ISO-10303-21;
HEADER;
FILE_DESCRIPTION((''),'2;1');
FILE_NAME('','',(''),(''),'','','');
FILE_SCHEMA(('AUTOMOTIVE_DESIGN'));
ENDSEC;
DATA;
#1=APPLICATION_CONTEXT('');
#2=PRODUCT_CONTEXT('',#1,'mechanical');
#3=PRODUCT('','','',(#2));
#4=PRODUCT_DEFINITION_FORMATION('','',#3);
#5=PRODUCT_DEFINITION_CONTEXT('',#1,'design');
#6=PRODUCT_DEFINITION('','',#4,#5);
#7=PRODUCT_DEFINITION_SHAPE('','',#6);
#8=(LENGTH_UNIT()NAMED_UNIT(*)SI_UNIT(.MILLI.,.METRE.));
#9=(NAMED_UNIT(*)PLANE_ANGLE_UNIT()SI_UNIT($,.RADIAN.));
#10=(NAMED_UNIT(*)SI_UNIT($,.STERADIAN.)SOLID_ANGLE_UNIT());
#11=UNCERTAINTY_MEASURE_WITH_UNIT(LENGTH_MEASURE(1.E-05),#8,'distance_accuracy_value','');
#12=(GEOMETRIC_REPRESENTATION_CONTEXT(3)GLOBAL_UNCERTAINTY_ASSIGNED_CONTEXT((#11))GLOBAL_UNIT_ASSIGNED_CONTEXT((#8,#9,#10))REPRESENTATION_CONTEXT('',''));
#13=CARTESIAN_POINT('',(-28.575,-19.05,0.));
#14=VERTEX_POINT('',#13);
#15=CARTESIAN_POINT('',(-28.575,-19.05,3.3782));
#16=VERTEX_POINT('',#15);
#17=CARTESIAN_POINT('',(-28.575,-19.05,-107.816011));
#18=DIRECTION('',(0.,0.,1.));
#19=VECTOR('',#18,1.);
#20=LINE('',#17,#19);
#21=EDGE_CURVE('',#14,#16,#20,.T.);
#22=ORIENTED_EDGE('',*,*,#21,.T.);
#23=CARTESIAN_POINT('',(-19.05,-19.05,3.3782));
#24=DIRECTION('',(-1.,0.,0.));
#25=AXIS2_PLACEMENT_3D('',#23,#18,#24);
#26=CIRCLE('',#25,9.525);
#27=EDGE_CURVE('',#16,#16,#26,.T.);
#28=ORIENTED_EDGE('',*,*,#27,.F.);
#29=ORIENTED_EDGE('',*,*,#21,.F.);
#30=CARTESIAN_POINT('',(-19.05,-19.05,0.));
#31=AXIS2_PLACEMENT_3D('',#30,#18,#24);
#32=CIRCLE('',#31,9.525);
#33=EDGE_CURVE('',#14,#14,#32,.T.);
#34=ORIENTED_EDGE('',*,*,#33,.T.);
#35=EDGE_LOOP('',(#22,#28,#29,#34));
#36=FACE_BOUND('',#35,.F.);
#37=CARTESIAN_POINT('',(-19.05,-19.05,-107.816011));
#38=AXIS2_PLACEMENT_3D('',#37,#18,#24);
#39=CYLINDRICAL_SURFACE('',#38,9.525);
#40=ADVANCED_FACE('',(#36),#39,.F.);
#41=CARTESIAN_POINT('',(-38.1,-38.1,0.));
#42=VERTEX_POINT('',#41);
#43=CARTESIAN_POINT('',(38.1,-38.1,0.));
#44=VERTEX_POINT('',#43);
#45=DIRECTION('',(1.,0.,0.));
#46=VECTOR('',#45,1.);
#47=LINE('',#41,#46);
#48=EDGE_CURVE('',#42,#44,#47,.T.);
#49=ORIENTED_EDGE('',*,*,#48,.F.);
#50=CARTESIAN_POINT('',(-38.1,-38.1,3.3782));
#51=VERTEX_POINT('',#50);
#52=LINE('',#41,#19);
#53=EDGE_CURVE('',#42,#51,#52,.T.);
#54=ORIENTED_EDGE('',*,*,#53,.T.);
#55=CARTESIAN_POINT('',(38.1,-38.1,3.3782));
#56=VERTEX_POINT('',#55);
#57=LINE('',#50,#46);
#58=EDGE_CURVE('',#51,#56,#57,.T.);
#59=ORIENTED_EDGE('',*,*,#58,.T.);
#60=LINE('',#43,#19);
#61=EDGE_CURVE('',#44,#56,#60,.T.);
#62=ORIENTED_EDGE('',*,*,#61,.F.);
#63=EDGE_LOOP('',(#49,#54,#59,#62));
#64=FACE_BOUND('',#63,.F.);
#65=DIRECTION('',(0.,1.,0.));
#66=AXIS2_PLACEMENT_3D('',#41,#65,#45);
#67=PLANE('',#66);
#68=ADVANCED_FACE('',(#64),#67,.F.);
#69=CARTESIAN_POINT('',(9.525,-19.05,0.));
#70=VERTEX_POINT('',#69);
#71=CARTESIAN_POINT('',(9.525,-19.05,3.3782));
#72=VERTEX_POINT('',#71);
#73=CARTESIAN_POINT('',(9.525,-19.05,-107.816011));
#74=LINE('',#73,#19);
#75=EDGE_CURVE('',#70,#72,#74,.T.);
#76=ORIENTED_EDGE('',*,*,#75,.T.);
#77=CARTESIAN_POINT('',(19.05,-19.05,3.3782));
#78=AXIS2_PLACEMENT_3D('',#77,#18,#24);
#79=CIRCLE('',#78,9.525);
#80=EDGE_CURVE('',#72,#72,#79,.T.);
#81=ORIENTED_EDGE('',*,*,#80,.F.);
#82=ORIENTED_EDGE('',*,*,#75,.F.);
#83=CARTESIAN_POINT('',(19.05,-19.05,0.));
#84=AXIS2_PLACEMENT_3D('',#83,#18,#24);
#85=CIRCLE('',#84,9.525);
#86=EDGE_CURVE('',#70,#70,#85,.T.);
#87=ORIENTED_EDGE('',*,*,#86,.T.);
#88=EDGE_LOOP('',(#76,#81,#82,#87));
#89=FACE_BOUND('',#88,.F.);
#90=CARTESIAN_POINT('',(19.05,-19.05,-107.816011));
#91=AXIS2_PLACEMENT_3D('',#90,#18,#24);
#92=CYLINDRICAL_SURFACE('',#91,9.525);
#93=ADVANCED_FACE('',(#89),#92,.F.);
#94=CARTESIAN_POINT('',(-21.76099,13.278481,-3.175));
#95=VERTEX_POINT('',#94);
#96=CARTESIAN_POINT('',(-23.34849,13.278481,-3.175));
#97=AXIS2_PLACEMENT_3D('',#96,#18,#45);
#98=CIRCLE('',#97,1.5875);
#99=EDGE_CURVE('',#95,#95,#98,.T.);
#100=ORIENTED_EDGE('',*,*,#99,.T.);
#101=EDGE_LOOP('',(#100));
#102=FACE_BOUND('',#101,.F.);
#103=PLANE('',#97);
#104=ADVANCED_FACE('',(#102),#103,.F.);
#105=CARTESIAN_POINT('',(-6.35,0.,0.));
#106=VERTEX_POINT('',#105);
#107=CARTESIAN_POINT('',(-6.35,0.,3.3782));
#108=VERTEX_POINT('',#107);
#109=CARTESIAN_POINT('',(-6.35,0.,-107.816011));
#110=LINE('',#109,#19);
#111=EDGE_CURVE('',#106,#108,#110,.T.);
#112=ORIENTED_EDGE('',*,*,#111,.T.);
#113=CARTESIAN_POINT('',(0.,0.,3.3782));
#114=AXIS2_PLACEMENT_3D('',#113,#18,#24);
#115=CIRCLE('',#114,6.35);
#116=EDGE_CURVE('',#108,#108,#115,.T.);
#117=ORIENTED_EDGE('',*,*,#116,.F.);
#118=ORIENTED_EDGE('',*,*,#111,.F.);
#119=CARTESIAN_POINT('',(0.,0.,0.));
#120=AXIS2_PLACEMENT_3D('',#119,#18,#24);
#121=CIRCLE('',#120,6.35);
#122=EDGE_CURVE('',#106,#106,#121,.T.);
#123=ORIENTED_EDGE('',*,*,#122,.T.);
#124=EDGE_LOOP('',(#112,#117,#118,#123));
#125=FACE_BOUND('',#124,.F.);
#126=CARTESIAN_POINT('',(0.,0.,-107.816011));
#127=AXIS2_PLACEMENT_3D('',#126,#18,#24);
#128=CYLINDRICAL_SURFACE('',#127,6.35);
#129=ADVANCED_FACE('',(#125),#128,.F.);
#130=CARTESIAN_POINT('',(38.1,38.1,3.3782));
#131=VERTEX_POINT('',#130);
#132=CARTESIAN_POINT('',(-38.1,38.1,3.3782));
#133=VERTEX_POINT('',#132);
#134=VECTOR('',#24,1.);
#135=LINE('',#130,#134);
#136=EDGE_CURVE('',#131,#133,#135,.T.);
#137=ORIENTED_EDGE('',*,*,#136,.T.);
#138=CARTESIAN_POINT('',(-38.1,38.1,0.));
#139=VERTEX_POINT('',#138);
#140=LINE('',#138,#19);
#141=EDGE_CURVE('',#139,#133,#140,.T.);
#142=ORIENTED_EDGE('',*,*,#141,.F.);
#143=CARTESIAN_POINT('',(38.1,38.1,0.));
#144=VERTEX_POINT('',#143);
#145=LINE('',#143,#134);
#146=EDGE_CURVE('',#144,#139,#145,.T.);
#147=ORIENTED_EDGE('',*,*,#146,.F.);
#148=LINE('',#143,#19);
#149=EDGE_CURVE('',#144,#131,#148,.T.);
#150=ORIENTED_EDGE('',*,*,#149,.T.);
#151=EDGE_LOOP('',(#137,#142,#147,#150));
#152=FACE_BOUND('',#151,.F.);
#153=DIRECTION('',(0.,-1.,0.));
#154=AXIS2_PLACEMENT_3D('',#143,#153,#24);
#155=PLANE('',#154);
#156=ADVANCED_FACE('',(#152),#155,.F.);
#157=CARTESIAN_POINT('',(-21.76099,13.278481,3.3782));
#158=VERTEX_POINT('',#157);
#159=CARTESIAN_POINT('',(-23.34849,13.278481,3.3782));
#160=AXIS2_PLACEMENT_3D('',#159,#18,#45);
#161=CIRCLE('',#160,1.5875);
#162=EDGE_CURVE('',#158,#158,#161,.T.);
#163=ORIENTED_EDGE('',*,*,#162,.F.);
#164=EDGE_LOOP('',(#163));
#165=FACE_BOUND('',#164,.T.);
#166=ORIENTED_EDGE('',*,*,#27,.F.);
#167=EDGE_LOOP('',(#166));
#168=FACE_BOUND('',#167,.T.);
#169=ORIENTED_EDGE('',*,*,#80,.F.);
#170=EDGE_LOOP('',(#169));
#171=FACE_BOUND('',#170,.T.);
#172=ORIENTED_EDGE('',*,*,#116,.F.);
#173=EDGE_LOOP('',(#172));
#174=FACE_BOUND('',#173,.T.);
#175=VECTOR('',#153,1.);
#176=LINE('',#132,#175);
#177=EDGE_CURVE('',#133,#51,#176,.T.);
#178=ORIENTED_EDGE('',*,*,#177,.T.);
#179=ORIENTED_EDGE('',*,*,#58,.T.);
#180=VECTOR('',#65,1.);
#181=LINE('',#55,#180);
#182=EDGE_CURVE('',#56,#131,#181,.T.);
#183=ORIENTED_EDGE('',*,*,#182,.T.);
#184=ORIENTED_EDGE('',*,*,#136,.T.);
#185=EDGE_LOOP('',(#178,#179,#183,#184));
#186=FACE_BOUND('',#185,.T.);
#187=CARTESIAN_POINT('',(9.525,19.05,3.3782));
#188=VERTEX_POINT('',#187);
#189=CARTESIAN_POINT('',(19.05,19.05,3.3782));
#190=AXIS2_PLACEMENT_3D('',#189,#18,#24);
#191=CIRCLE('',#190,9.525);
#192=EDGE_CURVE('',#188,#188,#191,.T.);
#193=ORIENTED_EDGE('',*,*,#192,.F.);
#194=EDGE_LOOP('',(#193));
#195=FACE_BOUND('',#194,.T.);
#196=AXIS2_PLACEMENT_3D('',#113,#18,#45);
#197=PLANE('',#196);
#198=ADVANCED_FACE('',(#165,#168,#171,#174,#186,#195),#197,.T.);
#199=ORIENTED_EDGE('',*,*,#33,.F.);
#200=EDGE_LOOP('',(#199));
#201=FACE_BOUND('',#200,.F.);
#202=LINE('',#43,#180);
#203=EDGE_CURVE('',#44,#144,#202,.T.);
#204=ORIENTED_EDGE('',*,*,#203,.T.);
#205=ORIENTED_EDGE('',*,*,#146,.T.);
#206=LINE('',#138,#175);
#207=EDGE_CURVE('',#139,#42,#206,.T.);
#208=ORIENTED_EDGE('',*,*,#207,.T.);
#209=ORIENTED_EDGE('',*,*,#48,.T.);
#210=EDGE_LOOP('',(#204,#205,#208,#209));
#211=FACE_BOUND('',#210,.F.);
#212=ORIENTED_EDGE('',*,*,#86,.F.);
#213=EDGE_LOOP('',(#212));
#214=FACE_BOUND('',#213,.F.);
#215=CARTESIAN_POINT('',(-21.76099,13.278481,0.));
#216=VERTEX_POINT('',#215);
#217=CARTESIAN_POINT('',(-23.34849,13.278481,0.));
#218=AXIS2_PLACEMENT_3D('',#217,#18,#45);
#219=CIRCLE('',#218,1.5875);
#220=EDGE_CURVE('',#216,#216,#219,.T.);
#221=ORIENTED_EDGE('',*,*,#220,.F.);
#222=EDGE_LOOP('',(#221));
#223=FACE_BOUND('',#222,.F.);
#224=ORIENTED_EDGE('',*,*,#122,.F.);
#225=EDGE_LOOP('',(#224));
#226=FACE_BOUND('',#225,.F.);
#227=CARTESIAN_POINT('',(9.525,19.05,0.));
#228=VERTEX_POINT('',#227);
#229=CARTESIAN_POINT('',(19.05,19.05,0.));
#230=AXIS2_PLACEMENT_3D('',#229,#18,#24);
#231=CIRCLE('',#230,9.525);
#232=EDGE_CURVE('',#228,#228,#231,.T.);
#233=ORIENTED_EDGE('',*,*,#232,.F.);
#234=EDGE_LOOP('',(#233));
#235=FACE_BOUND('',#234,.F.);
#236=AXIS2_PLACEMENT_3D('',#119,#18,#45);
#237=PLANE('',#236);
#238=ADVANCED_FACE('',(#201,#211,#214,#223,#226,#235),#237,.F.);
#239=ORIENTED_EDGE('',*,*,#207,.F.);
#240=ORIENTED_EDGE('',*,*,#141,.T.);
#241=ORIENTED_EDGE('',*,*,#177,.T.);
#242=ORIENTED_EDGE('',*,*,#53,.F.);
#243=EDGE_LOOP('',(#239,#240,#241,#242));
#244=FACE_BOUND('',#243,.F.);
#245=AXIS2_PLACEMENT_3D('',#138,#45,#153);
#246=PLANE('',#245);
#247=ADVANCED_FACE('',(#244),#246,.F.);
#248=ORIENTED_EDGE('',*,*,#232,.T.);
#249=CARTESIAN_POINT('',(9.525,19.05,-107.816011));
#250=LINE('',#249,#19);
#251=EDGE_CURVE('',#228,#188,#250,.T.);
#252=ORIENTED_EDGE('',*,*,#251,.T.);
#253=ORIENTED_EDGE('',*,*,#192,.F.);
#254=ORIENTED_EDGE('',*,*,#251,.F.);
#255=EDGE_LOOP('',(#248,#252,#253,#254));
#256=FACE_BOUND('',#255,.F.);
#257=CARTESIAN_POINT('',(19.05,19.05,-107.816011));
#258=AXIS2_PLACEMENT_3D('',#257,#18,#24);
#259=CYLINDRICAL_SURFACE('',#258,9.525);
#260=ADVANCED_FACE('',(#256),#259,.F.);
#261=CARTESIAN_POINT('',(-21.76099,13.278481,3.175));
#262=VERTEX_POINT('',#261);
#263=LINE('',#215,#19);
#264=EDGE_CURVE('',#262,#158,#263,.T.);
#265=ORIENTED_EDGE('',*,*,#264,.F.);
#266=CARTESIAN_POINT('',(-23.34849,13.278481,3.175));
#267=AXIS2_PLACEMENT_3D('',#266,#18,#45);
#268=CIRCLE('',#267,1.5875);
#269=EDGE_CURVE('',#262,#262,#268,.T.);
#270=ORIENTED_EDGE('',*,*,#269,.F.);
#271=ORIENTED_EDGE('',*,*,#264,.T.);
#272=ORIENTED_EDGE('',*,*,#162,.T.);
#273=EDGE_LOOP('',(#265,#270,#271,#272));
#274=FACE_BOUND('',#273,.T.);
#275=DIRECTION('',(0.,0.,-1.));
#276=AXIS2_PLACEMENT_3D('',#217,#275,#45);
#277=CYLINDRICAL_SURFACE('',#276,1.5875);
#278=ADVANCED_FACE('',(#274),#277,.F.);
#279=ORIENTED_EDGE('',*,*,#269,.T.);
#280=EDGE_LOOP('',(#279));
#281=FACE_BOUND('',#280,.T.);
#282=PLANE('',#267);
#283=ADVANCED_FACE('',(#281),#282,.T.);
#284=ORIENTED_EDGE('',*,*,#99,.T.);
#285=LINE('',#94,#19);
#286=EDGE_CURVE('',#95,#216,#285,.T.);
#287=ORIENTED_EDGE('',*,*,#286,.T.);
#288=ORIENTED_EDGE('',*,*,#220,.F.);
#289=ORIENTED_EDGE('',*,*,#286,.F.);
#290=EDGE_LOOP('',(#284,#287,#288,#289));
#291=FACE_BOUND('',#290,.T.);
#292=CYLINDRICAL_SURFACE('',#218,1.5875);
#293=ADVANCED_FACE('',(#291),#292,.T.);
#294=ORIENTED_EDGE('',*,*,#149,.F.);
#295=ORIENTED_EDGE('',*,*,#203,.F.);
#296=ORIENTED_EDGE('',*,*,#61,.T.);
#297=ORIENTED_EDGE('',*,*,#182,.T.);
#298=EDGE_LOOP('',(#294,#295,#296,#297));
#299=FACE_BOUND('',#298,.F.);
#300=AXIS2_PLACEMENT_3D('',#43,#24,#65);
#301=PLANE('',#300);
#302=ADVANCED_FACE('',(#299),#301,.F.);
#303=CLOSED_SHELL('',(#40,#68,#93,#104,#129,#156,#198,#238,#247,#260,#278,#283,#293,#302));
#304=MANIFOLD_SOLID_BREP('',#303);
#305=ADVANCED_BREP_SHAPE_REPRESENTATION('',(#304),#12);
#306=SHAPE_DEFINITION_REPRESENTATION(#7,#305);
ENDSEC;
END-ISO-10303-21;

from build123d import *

# Parameters (mm, degrees)
F0_R     = 1.5875
F1_DEPTH = 3.3782
F2_D     = 19.05
F3_D     = 12.7
F4_DEPTH = 3.175


# Not quite as in the source:
# - a feature names something its author has since deleted; it is built from what else it names


with BuildPart() as f1:
    # F0 (on Top) → F1 (new body)
    with BuildSketch(Plane.XY):
        Polygon((38.1, 38.1), (-38.1, 38.1), (-38.1, -38.1), (0, -38.1), (38.1, -38.1), (38.1, 0), align=None)
        with Locations((-23.3484897763, 13.2784806192)):
            Circle(F0_R, mode=Mode.SUBTRACT)
    extrude(amount=F1_DEPTH)

    # F2 (through all)
    with Locations(Plane(origin=(0, 0, 0), x_dir=(1, 0, 0), z_dir=(0, 0, -1))):
        with Locations((19.05, -19.05), (19.05, 19.05), (-19.05, 19.05)):
            Hole(F2_D / 2)

    # F3 (through all)
    with Locations(Plane(origin=(0, 0, 0), x_dir=(1, 0, 0), z_dir=(0, 0, -1))):
        with Locations((0, 0)):
            Hole(F3_D / 2)

    # F0 (on Top) → F4 (join, symmetric)
    with BuildSketch(Plane.XY):
        with Locations((-23.3484897763, 13.2784806192)):
            Circle(F0_R)
    extrude(amount=F4_DEPTH, both=True)


solid = f1.part
